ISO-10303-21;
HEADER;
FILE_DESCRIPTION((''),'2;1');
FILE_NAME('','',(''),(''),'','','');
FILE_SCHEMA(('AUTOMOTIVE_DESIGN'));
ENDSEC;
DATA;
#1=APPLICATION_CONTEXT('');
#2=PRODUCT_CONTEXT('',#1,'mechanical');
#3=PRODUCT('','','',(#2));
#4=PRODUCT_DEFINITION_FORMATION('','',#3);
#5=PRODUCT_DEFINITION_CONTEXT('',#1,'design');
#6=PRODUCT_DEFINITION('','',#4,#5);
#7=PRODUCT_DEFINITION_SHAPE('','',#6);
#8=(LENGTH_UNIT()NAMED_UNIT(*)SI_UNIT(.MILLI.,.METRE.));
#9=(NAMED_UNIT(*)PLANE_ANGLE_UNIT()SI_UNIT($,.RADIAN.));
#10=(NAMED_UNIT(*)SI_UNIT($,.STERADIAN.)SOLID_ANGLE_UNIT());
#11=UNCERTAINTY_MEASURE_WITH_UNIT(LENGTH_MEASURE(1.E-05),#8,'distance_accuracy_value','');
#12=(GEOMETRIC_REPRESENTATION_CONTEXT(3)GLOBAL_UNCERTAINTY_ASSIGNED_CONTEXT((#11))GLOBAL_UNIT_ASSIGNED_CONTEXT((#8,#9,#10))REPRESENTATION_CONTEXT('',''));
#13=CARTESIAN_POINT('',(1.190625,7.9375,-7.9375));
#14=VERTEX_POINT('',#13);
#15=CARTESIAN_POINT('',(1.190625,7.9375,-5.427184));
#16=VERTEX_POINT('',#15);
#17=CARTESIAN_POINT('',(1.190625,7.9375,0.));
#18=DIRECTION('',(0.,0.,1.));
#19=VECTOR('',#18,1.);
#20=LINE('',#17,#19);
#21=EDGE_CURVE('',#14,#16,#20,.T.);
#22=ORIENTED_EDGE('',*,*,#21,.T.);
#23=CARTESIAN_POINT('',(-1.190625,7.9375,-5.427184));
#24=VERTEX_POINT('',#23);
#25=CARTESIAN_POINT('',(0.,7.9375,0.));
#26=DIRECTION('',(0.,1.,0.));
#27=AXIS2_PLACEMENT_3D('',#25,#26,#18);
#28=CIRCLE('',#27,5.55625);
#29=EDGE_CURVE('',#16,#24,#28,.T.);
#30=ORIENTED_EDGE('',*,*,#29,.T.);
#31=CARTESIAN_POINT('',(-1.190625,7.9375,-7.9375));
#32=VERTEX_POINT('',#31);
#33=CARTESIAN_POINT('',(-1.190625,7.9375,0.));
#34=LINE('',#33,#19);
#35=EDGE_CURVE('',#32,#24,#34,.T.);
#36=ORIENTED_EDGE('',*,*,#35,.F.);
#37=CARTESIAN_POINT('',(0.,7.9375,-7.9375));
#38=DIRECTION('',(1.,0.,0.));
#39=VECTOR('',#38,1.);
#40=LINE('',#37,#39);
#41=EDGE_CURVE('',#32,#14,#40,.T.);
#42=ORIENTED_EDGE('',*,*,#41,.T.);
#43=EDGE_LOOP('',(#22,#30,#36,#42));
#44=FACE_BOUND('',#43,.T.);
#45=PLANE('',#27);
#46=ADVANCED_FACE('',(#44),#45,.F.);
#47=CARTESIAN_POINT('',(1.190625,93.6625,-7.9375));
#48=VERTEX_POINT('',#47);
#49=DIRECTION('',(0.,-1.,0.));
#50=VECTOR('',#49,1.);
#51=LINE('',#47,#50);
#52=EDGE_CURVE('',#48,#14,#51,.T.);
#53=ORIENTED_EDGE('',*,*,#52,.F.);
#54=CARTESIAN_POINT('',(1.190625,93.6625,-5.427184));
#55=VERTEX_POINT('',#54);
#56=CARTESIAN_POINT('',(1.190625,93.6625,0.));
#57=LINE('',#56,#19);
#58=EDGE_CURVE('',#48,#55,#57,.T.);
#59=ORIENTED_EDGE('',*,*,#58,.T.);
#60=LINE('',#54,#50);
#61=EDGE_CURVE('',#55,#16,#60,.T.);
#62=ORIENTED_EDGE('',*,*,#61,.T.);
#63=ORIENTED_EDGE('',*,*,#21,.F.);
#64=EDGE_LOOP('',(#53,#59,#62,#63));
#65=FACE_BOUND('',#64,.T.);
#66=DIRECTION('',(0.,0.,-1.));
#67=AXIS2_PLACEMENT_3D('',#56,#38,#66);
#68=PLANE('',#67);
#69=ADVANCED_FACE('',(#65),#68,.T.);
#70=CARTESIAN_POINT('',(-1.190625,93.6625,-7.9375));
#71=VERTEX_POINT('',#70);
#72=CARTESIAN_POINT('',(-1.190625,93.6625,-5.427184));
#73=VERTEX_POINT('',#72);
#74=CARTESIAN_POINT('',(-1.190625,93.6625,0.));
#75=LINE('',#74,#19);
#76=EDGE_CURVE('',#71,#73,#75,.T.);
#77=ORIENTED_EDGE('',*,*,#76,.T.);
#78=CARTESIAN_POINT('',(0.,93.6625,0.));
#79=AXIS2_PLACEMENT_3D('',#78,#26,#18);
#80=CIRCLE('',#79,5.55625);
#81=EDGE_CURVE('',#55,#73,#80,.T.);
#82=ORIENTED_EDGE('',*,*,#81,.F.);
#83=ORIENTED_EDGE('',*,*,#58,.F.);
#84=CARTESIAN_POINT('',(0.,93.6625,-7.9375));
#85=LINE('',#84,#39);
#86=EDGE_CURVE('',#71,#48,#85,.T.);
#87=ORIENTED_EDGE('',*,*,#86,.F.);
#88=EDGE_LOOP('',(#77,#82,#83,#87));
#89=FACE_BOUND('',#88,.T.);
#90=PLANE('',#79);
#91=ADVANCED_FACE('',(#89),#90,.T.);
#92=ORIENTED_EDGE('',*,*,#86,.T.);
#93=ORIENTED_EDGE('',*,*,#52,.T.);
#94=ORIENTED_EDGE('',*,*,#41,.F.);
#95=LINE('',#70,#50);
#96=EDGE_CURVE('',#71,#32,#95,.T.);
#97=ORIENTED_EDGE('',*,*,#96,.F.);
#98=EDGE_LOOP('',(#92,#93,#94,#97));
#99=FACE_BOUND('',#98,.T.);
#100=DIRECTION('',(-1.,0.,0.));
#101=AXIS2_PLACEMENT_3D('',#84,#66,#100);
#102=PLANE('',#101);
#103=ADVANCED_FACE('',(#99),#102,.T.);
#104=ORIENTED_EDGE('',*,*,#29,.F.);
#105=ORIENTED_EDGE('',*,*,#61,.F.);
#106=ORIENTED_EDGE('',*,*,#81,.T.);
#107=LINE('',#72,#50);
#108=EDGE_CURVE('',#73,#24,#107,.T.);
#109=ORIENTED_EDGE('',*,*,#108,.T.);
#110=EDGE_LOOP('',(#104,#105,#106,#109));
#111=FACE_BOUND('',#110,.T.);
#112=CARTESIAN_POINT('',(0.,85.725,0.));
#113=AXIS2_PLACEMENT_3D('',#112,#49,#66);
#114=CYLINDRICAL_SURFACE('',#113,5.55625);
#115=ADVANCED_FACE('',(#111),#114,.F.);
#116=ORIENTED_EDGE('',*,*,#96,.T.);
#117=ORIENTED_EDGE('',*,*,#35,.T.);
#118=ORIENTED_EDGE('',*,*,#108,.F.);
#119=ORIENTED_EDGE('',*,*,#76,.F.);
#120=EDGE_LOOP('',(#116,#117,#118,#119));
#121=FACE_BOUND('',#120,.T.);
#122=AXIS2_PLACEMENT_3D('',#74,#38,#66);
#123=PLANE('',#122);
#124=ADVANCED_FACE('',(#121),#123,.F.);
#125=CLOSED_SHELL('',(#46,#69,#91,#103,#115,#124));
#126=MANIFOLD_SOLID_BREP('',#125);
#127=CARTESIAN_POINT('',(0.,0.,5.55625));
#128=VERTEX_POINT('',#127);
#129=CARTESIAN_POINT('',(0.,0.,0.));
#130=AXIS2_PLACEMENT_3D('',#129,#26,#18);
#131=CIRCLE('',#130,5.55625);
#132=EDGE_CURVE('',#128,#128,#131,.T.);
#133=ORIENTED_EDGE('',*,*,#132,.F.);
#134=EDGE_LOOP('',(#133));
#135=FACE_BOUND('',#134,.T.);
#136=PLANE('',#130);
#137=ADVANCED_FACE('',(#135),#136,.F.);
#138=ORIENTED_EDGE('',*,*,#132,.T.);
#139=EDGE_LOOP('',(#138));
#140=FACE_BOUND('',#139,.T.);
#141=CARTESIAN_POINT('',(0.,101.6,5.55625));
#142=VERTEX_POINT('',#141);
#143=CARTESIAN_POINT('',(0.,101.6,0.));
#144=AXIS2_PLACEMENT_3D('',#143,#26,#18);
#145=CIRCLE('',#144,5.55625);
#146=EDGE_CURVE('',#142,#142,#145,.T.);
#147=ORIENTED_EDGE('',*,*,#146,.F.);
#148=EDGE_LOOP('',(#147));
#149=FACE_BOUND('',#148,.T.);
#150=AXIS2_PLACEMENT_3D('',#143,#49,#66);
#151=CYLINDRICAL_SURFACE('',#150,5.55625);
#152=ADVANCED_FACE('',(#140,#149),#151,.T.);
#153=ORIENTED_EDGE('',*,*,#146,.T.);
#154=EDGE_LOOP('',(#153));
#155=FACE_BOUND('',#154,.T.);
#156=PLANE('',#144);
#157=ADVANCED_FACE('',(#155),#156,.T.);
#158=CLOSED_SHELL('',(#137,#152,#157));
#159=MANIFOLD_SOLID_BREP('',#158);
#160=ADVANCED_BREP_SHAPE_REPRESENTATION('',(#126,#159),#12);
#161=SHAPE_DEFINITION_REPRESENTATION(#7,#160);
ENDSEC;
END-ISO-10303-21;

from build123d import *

# Parameters (mm, degrees)
BOSS_EXTRUDE2_DEPTH = 101.6
BOSS_EXTRUDE3_DEPTH = 85.725
MOVE_FACE2_DEPTH    = 7.9375
MOVE_START          = 85.725
MOVE_FACE2_2_DEPTH  = 7.9375


# Read off the part's stored shape, not the designer's step: Move Face2
with BuildPart() as part:
    # Sketch2 → Boss-Extrude2 (new body)
    with BuildSketch(Plane(origin=(0, 0, 0), x_dir=(1, 0, 0), z_dir=(0, 1, 0))):
        with BuildLine():
            Line((-1.190625, -5.427184), (-1.190625, 5.427184))
            ThreePointArc((-1.190625, 5.427184), (-5.55625, 0), (-1.190625, -5.427184))
        make_face()
        with BuildLine():
            ThreePointArc((1.190625, 5.427184), (0, 5.55625), (-1.190625, 5.427184))
            Line((-1.190625, 5.427184), (-1.190625, -5.427184))
            ThreePointArc((-1.190625, -5.427184), (0, -5.55625), (1.190625, -5.427184))
            Line((1.190625, -5.427184), (1.190625, 5.427184))
        make_face()
        with BuildLine():
            ThreePointArc((5.55625, 0), (4.32939512, 3.482563991), (1.190625, 5.427184))
            Line((1.190625, 5.427184), (1.190625, -5.427184))
            ThreePointArc((1.190625, -5.427184), (4.32939512, -3.482563991), (5.55625, 0))
        make_face()
    extrude(amount=BOSS_EXTRUDE2_DEPTH)


with BuildPart() as body_2:
    # Sketch2<6> → Boss-Extrude3 (new body)
    with BuildSketch(Plane(origin=(0, 0, 0), x_dir=(1, 0, 0), z_dir=(0, 1, 0))):
        with BuildLine():
            Line((1.190625, 7.9375), (-1.190625, 7.9375))
            Line((-1.190625, 7.9375), (-1.190625, 5.427184))
            ThreePointArc((-1.190625, 5.427184), (0, 5.55625), (1.190625, 5.427184))
            Line((1.190625, 5.427184), (1.190625, 7.9375))
        make_face()
    extrude(amount=BOSS_EXTRUDE3_DEPTH)

    # Move Face2 outline → Move Face2 (cut)
    with BuildSketch(Plane(origin=(0, 0, 0), x_dir=(1, 0, 0), z_dir=(0, 1, 0))):
        with BuildLine():
            Line((-1.190625, 7.9375), (-1.190625, 5.427184))
            ThreePointArc((-1.190625, 5.427184), (0, 5.55625), (1.190625, 5.427184))
            Line((1.190625, 5.427184), (1.190625, 7.9375))
            Line((1.190625, 7.9375), (-1.190625, 7.9375))
        make_face()
    extrude(amount=MOVE_FACE2_DEPTH, mode=Mode.SUBTRACT)

    # Move Face2 2 outline → Move Face2 2 (add)
    with BuildSketch(Plane(origin=(0, 0, 0), x_dir=(1, 0, 0), z_dir=(0, 1, 0)).offset(MOVE_START)):
        with BuildLine():
            Line((-1.190625, 7.9375), (-1.190625, 5.427184))
            ThreePointArc((-1.190625, 5.427184), (0, 5.55625), (1.190625, 5.427184))
            Line((1.190625, 5.427184), (1.190625, 7.9375))
            Line((1.190625, 7.9375), (-1.190625, 7.9375))
        make_face()
    extrude(amount=MOVE_FACE2_2_DEPTH)


solid = Compound([part.part, body_2.part])
